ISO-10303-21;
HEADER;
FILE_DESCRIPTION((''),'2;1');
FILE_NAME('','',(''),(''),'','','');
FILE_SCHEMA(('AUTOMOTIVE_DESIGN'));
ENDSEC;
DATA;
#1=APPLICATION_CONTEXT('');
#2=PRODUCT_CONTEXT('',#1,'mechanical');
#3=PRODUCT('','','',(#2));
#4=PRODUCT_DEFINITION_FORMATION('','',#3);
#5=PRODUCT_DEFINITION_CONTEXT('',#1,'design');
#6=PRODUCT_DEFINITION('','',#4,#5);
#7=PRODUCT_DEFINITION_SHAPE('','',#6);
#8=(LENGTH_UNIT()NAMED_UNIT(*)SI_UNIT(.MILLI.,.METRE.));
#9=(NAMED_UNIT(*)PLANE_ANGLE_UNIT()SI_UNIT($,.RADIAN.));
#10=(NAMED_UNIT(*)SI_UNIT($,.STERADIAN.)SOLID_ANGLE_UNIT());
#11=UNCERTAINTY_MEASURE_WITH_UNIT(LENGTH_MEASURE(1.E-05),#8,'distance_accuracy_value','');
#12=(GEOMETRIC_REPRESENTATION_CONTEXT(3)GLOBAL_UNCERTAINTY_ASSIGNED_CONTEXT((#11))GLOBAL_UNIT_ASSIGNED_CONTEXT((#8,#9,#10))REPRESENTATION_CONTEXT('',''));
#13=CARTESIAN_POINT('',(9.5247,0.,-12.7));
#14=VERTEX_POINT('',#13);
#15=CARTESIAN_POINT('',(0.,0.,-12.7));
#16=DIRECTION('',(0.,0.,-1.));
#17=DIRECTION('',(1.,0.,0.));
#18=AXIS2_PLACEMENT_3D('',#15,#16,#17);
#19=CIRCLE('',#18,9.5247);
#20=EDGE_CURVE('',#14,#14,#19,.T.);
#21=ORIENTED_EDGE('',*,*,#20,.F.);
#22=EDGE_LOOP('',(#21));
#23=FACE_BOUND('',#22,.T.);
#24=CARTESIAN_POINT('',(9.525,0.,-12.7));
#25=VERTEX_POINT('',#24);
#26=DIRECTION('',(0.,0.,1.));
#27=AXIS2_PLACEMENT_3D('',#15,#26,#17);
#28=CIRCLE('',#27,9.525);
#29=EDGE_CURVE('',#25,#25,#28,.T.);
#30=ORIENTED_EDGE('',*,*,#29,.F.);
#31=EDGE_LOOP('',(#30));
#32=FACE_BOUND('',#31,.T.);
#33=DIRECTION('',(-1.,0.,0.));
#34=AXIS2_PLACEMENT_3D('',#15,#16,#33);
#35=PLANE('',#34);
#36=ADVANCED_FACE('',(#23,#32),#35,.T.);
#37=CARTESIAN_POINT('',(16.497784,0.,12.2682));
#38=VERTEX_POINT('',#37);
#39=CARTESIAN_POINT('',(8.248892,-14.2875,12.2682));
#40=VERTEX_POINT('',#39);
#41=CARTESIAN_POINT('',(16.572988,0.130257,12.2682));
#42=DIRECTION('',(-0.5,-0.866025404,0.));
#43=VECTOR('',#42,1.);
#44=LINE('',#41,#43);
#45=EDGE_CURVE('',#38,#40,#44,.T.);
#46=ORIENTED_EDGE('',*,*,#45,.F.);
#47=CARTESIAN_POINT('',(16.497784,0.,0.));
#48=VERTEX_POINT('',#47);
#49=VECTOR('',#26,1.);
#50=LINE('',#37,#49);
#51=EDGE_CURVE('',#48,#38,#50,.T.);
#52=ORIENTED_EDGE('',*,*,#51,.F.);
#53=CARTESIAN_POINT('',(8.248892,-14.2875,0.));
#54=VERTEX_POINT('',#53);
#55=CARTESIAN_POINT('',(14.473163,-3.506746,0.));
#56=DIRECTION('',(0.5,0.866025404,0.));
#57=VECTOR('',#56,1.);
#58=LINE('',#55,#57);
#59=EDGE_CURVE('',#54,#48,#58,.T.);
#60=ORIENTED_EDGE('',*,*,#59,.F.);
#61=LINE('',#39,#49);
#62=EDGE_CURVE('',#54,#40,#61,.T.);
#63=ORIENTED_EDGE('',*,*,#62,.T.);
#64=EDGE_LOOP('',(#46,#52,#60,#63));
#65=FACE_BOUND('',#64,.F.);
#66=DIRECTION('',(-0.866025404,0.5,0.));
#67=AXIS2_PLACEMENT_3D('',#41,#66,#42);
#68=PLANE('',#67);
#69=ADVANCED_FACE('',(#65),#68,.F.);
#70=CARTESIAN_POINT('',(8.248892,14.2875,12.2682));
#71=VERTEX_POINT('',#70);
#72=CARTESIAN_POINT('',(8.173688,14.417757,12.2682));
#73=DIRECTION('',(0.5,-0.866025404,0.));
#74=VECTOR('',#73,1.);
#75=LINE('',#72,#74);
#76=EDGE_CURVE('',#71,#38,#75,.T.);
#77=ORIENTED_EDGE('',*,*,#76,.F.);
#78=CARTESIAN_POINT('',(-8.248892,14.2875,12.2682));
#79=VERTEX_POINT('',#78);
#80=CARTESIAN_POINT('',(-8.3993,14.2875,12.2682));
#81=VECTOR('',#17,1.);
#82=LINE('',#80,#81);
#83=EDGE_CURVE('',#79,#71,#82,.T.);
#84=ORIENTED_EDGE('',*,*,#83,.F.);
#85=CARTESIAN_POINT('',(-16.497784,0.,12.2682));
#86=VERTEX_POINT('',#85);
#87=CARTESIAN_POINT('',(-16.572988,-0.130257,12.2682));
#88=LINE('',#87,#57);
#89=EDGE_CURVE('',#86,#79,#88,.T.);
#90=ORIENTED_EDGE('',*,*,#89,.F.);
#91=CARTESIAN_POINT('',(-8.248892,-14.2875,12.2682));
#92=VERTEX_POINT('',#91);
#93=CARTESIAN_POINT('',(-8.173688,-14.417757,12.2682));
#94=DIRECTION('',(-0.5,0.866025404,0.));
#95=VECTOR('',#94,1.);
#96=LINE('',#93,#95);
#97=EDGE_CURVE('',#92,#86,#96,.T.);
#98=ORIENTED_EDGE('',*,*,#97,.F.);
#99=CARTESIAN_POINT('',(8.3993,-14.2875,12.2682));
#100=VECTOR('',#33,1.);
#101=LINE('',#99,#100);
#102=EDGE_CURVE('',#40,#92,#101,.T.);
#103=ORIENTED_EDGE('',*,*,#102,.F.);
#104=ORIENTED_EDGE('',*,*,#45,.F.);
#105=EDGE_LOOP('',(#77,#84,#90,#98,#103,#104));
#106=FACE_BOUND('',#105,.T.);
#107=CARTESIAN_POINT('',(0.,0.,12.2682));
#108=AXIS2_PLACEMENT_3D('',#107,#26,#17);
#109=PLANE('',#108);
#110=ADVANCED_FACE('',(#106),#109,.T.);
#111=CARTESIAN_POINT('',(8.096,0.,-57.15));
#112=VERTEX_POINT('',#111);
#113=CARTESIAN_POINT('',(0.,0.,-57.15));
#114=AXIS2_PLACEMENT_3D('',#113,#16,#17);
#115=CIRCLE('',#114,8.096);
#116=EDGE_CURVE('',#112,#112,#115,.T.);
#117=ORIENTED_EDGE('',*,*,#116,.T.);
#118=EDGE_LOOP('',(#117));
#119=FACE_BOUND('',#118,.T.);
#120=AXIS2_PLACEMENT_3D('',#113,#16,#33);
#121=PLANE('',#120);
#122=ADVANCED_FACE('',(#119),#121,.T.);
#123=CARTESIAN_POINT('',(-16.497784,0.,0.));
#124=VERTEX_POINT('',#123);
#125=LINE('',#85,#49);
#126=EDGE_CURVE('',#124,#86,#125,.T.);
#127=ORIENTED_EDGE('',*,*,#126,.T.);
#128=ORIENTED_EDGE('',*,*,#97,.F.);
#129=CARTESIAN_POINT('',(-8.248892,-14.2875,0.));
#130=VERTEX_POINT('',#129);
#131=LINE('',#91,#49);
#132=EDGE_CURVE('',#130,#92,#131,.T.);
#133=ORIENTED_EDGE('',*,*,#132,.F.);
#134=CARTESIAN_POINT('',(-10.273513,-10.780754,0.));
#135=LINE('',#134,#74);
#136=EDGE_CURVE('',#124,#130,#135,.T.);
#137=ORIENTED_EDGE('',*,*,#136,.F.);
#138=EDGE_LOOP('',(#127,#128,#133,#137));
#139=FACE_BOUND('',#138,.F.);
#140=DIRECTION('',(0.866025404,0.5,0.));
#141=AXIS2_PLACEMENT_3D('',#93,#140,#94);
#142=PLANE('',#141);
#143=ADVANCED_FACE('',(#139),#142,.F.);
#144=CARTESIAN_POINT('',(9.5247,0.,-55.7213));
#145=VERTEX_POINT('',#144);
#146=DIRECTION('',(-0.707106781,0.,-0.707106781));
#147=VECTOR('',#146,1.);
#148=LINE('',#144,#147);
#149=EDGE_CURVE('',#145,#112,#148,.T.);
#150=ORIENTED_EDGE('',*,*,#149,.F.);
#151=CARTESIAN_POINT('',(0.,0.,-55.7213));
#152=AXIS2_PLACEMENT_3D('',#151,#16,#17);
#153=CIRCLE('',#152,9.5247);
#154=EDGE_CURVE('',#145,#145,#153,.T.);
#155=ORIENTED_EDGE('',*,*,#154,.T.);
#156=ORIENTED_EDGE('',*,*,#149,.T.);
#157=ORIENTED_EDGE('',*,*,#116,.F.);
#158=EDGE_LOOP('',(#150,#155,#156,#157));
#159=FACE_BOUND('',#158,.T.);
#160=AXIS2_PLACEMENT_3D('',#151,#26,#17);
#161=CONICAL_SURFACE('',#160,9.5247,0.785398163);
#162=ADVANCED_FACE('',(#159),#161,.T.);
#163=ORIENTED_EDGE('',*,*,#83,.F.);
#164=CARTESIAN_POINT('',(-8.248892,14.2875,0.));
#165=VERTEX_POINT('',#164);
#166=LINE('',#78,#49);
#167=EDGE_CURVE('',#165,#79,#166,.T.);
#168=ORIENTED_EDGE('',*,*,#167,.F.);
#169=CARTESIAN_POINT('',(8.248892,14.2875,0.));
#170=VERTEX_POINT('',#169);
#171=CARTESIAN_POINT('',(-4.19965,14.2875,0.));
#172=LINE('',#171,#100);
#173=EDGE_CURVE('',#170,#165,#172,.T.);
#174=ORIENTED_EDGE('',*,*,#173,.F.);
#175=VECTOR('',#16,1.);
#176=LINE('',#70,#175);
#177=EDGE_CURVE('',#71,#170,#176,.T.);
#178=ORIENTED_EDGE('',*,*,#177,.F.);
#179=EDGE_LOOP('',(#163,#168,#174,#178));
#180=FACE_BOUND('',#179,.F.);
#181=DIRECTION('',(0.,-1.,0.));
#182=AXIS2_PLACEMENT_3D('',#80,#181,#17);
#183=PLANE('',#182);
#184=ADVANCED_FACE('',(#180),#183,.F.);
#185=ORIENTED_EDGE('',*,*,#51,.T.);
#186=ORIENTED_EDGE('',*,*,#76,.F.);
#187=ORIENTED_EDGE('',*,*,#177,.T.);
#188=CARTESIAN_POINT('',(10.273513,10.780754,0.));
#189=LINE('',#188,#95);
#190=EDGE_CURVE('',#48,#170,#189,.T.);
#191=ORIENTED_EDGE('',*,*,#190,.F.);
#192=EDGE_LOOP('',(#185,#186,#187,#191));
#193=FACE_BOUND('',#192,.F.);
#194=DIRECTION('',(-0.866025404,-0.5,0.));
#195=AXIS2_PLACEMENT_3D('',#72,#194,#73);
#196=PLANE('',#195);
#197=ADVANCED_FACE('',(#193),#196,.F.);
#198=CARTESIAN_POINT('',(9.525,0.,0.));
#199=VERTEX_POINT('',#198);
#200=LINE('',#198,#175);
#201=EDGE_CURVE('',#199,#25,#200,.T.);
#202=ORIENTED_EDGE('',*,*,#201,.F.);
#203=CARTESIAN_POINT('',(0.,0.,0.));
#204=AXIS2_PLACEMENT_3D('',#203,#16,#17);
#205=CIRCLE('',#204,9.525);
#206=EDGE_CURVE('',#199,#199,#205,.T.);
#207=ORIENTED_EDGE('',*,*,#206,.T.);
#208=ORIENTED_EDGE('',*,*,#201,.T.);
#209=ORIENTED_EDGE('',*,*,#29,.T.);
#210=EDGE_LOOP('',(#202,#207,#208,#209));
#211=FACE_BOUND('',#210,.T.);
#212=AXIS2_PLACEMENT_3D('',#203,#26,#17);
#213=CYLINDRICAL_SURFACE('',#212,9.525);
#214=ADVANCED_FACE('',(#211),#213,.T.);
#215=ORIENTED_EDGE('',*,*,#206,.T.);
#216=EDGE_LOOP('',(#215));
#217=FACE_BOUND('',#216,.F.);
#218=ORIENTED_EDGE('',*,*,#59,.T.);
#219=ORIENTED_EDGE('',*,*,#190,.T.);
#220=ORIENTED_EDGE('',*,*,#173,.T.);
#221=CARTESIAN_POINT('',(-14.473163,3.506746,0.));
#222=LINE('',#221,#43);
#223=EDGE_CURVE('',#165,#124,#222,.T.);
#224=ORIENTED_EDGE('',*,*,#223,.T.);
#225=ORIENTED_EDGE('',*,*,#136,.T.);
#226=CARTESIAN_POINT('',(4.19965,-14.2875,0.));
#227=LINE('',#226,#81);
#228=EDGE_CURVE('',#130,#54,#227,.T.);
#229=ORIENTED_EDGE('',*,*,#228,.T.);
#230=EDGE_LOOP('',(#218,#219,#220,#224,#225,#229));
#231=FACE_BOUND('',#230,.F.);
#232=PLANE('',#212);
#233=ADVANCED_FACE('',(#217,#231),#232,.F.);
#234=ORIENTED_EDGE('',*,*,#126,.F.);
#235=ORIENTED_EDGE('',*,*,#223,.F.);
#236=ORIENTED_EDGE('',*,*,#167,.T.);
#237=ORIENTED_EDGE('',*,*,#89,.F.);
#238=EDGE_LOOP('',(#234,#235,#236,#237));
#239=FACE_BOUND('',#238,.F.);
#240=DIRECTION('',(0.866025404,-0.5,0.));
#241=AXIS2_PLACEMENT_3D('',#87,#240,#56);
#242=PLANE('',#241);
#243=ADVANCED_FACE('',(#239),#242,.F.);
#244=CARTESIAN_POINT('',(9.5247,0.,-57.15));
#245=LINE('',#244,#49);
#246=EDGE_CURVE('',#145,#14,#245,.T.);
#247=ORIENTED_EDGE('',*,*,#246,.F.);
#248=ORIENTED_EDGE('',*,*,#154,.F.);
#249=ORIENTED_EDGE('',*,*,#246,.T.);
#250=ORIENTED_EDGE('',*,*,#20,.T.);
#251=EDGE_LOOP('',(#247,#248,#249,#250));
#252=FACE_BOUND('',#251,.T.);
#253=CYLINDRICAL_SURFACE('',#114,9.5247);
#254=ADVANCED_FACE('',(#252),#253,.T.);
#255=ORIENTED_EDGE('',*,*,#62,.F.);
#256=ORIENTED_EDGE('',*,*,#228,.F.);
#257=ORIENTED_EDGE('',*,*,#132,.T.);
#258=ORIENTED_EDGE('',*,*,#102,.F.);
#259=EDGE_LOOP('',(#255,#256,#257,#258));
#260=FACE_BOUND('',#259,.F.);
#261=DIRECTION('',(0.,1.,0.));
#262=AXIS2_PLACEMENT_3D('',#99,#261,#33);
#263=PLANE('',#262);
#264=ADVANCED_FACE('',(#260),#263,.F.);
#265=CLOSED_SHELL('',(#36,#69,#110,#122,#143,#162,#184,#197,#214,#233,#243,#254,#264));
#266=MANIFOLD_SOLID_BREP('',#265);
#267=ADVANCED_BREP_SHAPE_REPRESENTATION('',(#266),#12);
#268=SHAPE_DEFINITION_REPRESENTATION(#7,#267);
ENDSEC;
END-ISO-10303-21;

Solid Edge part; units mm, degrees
sketch "Sketch1" plane through (0, 0, 0) normal (0, 0, 1) x (1, 0, 0)
  circle A0 centre (0, 0) radius 16.5735
  dimension "D1" = 33.147
extrude "Protrusion1" add sketch "Sketch1" along normal blind 12.2682
sketch "Sketch2" plane through (0, 0, 0) normal (0, 0, -1) x (1, 0, 0)
  circle A0 centre (0, 0) radius 9.525
extrude "Protrusion2" add sketch "Sketch2" along normal blind 57.15
sketch "Sketch3" plane through (0, 0, -57.15) normal (0, 0, -1) x (1, 0, 0)
  circle A0 centre (0, 0) radius 9.5247
extrude "Cutout1" cut sketch "Sketch3" against normal blind 44.45 flip side to cut
chamfer "Chamfer_1" distance 1.4287 angle 45 1 edges at (-9.5247, 0, -57.15)
sketch "Sketch4" plane through (0, 0, 12.2682) normal (0, 0, 1) x (1, 0, 0)
  line L0 (-8.3993, 14.2875) -> (8.3993, 14.2875)
  dimension "D1" = 28.575
extrude "Cutout2" cut sketch "Sketch4" against normal up to next material side at (0, 14.3375, 12.2682)
pattern_circular "Pattern1" count 6 over 360 about axis through (0, 0, 12.2682) along (0, 0, 1) of "Cutout2"
properties part number "201111"
